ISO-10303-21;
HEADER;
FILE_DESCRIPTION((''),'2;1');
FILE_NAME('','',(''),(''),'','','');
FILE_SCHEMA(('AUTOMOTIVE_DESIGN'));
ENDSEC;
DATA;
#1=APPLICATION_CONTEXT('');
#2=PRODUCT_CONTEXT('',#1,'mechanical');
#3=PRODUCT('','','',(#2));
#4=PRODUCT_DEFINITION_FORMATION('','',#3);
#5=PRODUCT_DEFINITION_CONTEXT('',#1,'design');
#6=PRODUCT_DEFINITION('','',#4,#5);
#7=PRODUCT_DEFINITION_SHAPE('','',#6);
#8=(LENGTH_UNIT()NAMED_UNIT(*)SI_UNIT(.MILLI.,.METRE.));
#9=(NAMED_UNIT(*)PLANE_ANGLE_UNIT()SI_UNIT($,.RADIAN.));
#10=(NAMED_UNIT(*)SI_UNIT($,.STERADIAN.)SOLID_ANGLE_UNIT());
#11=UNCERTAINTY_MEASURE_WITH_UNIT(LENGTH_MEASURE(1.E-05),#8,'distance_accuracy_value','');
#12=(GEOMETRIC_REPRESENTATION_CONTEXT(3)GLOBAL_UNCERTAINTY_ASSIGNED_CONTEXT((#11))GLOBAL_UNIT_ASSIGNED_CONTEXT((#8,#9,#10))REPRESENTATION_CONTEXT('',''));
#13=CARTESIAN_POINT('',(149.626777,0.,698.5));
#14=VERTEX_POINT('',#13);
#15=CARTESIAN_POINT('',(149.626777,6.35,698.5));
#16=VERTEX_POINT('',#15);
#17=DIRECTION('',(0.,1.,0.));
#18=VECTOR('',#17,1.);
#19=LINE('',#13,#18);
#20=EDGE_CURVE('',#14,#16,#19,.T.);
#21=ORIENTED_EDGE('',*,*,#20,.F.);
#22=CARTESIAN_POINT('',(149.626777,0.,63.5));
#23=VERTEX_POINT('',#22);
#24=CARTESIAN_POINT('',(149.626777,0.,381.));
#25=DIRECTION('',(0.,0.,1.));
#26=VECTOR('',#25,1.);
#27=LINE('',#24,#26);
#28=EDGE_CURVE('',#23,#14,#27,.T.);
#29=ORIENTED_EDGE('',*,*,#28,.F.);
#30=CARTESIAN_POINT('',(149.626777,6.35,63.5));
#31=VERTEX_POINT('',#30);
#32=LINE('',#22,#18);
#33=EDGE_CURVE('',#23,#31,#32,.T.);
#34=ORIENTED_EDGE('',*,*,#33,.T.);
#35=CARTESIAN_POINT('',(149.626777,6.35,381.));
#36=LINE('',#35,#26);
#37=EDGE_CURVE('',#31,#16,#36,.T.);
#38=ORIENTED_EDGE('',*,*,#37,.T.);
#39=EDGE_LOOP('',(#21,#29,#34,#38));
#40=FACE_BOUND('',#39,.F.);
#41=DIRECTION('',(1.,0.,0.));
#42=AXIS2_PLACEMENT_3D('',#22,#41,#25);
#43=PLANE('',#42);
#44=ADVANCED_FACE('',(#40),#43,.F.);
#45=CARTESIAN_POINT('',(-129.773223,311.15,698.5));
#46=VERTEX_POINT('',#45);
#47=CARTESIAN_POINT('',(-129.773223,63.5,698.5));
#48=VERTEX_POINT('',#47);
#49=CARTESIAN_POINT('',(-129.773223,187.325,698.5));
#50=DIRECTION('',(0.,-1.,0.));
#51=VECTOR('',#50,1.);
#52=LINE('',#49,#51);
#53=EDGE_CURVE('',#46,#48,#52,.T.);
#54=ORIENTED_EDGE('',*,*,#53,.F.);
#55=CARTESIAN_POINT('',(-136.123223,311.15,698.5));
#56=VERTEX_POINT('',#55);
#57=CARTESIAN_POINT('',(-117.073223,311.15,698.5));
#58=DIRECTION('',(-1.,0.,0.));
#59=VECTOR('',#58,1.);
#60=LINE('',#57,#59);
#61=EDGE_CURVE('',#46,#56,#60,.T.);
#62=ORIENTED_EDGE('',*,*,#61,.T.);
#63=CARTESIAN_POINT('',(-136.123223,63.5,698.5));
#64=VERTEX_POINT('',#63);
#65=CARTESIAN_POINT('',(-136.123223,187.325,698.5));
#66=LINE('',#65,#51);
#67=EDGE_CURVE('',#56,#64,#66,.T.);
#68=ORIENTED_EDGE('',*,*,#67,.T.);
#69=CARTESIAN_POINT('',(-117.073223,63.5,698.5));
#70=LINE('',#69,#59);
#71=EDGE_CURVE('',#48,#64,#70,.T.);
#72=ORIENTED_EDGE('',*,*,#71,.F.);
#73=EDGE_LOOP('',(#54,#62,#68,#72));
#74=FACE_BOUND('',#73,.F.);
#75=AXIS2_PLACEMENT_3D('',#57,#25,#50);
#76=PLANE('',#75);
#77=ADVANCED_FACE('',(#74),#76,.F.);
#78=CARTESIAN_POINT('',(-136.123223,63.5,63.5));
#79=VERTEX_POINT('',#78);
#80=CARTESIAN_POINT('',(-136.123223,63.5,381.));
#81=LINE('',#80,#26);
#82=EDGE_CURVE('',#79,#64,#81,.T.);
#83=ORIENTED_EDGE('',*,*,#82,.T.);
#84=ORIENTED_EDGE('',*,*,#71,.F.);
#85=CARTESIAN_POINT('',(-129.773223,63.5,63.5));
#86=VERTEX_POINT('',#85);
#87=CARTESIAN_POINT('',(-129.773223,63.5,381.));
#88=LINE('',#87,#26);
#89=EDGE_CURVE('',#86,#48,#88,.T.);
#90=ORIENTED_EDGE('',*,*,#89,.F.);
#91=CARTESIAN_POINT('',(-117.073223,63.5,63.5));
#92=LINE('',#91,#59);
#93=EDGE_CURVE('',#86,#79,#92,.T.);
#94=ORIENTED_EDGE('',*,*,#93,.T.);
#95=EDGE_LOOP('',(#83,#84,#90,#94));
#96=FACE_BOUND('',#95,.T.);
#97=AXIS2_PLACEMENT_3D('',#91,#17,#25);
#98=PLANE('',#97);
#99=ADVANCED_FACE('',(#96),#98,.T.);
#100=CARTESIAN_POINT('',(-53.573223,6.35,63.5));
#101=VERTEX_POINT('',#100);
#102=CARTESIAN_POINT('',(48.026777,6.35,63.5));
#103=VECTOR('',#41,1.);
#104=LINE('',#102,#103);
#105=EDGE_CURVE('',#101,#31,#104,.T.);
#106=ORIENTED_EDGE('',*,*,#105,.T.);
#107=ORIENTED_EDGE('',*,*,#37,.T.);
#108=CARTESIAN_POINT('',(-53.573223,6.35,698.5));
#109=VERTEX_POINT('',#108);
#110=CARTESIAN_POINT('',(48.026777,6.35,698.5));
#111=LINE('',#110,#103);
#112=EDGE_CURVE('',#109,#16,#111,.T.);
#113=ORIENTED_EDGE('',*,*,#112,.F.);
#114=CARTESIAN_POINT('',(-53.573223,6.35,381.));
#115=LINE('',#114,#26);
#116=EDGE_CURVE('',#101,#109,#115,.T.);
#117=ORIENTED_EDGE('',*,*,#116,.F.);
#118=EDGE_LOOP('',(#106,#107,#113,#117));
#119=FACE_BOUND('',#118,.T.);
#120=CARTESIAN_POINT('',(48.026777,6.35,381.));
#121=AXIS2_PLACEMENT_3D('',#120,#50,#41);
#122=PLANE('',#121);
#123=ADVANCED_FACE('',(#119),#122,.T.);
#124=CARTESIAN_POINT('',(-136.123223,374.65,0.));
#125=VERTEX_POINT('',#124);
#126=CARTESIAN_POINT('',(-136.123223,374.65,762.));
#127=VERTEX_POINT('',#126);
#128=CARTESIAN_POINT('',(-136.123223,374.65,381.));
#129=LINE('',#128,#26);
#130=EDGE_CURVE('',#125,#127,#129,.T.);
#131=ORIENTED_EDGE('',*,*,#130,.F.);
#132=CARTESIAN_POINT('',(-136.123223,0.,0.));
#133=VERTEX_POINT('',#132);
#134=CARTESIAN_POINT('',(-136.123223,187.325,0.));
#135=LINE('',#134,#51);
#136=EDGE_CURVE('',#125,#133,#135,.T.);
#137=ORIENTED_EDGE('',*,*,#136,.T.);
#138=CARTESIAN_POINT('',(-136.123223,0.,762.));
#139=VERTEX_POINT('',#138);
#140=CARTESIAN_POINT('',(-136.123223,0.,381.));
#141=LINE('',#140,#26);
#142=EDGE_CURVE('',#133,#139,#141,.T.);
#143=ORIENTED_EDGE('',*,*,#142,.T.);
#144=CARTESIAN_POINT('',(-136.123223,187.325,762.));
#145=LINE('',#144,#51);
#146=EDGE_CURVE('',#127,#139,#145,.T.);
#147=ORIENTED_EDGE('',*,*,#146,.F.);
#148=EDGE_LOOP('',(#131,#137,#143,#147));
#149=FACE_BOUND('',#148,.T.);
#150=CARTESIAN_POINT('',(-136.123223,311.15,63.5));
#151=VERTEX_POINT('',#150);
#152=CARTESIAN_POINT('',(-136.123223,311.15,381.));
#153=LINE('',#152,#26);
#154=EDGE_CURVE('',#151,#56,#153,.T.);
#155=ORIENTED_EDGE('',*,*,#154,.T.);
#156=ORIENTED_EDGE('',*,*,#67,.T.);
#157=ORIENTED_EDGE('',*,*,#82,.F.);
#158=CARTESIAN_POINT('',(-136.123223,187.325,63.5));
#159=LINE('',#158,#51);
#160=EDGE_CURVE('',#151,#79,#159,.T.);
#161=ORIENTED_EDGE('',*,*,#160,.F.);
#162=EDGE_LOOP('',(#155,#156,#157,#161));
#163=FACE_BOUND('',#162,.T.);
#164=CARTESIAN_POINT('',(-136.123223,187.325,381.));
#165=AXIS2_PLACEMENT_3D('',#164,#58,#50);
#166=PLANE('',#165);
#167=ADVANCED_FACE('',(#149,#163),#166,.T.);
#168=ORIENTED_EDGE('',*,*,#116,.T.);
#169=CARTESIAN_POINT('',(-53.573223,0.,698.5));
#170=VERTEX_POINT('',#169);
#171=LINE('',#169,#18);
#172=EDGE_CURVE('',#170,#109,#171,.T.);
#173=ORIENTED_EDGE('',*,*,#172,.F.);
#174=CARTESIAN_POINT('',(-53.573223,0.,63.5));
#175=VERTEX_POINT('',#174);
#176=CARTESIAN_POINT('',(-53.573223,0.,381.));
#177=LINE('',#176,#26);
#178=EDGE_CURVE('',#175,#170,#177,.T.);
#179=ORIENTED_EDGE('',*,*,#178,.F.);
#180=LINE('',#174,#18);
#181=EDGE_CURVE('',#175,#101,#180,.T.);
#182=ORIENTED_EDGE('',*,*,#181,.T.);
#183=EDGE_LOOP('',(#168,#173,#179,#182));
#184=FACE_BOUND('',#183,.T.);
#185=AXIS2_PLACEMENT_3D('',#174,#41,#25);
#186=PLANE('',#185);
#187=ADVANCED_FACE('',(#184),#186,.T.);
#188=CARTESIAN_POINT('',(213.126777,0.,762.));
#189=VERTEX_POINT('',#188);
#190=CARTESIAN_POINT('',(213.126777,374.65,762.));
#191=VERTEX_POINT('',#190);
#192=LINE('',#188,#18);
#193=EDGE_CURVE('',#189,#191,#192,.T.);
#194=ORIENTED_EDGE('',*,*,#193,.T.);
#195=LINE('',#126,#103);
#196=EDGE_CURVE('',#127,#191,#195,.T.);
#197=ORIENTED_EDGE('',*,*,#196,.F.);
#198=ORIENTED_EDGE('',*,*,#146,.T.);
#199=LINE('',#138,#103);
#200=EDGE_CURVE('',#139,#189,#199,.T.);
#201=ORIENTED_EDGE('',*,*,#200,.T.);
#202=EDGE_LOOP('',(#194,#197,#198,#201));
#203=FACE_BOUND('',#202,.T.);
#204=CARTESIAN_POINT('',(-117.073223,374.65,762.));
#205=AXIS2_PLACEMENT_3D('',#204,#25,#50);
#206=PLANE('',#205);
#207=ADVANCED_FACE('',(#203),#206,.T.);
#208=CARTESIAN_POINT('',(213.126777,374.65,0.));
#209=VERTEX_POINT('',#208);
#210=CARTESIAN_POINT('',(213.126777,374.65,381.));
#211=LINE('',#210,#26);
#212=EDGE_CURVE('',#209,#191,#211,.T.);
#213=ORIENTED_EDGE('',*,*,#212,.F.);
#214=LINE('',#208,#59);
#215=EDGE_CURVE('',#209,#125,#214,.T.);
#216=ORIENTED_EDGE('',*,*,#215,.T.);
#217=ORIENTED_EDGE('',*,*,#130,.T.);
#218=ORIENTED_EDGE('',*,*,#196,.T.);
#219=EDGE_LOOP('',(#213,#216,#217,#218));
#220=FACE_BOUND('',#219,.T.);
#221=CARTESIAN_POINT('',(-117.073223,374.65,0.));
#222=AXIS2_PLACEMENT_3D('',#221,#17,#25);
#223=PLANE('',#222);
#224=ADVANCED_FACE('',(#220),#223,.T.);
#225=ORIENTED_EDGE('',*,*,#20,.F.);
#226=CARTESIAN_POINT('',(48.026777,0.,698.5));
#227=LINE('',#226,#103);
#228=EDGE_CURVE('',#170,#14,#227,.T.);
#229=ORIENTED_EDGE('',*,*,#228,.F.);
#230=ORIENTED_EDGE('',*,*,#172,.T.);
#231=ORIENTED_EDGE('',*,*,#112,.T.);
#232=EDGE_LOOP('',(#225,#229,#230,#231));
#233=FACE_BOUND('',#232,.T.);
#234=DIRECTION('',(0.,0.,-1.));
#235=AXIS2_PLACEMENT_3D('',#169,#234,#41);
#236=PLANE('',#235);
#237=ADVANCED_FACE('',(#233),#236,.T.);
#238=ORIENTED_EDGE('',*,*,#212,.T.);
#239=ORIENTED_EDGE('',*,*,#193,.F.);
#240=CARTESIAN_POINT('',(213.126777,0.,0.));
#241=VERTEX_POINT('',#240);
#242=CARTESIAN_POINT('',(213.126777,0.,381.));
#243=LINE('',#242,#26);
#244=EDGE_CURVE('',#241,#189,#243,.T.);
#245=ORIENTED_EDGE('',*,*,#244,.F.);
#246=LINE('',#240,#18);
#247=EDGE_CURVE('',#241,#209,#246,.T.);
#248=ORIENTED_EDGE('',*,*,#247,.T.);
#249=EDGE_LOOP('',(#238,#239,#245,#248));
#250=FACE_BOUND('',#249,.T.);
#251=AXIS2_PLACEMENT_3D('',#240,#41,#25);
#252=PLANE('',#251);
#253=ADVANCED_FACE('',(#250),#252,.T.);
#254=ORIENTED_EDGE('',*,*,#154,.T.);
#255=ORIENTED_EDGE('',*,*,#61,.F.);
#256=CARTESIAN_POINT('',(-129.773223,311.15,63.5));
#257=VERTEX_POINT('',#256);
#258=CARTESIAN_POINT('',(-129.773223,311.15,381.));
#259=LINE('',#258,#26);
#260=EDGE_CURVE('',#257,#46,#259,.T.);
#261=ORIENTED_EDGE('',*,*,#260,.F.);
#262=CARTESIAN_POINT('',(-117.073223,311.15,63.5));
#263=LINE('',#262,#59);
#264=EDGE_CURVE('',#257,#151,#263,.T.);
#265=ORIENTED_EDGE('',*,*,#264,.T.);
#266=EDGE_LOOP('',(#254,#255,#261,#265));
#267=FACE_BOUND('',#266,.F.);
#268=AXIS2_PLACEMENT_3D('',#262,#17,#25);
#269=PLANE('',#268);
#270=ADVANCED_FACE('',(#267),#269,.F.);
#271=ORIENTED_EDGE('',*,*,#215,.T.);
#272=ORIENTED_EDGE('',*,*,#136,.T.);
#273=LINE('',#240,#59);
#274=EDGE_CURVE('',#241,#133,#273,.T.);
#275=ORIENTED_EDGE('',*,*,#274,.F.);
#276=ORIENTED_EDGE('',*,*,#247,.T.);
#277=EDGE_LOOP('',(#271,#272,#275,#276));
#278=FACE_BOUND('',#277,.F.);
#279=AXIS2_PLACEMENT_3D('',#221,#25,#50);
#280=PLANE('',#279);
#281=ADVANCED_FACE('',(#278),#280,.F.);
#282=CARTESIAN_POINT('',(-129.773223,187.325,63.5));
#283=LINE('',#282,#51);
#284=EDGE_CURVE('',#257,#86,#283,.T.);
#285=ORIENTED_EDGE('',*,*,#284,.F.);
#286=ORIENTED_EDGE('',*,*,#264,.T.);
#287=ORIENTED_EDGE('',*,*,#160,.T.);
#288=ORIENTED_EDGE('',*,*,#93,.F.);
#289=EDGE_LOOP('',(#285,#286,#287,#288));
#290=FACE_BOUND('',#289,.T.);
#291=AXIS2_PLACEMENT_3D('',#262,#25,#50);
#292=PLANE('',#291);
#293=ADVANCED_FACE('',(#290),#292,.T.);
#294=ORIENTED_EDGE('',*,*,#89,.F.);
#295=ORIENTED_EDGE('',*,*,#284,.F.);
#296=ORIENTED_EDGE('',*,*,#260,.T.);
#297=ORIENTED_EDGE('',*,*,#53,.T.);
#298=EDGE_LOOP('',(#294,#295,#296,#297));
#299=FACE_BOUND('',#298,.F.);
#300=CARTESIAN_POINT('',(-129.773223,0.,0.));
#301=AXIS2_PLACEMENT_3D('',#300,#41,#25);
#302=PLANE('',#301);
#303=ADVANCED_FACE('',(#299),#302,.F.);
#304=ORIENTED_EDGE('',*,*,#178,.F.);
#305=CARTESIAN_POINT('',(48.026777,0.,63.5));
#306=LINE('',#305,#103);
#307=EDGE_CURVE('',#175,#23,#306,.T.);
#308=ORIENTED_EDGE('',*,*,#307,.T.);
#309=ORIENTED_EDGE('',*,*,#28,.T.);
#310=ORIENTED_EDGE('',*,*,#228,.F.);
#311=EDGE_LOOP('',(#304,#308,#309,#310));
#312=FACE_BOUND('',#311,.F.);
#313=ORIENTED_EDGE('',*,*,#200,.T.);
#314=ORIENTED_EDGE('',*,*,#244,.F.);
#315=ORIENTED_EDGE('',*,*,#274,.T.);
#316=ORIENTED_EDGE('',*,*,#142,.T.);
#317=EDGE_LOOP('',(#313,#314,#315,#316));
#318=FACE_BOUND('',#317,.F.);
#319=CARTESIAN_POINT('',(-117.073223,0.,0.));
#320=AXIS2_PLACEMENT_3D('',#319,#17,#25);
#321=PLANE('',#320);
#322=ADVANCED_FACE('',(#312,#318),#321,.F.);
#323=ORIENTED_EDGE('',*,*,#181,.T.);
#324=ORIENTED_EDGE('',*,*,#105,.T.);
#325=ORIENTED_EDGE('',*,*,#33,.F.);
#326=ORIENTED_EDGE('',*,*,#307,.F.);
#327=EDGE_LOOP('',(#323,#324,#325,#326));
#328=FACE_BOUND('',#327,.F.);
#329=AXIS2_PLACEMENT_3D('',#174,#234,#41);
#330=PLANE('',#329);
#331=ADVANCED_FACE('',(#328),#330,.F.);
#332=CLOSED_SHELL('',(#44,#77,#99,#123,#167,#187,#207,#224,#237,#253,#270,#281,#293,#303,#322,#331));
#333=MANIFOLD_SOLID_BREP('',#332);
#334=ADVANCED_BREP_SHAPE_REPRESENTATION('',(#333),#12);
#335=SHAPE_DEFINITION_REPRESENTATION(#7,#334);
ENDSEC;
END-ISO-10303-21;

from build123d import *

# Parameters (mm, degrees)
F0_W     = 330.2
F0_H     = 762
F0_W_2   = 203.2
F0_H_2   = 635
F1_DEPTH = 374.65
F2_DEPTH = 6.35
F3_W     = 374.65
F3_H     = 762
F3_W_2   = 247.65
F3_H_2   = 635
F4_DEPTH = 19.05
F5_DEPTH = 12.7


# Not quite as in the source:
# - a feature names something its author has since deleted; it is built from what else it names


with BuildPart() as f1:
    # F0 (on Front) → F1 (new body)
    with BuildSketch(Plane.XZ):
        with Locations((48.0267770052, 381)):
            Rectangle(F0_W, F0_H)
        with Locations((48.0267770052, 381)):
            Rectangle(F0_W_2, F0_H_2, mode=Mode.SUBTRACT)
        with Locations((48.0267770052, 381)):
            Rectangle(F0_W_2, F0_H_2)
    extrude(amount=-F1_DEPTH)

    # F0 (on Front) → F2 (cut)
    with BuildSketch(Plane.XZ):
        with Locations((48.0267770052, 381)):
            Rectangle(F0_W_2, F0_H_2)
    extrude(amount=-F2_DEPTH, mode=Mode.SUBTRACT)

    # F3 (on face) → F4 (join)
    with BuildSketch(Plane(origin=(-117.0732229948, 0, 0), x_dir=(0, -1, 0), z_dir=(-1, 0, 0))):
        with Locations((-187.325, 381)):
            Rectangle(F3_W, F3_H)
        with Locations((-187.325, 381)):
            Rectangle(F3_W_2, F3_H_2, mode=Mode.SUBTRACT)
    extrude(amount=F4_DEPTH)

    # F5 (add): a face of the model
    f5_faces = [f1.faces().sort_by_distance(p)[0] for p in [
        (-117.0732229948, 187.325, 381),
    ]]
    extrude(f5_faces, amount=F5_DEPTH)


solid = f1.part
